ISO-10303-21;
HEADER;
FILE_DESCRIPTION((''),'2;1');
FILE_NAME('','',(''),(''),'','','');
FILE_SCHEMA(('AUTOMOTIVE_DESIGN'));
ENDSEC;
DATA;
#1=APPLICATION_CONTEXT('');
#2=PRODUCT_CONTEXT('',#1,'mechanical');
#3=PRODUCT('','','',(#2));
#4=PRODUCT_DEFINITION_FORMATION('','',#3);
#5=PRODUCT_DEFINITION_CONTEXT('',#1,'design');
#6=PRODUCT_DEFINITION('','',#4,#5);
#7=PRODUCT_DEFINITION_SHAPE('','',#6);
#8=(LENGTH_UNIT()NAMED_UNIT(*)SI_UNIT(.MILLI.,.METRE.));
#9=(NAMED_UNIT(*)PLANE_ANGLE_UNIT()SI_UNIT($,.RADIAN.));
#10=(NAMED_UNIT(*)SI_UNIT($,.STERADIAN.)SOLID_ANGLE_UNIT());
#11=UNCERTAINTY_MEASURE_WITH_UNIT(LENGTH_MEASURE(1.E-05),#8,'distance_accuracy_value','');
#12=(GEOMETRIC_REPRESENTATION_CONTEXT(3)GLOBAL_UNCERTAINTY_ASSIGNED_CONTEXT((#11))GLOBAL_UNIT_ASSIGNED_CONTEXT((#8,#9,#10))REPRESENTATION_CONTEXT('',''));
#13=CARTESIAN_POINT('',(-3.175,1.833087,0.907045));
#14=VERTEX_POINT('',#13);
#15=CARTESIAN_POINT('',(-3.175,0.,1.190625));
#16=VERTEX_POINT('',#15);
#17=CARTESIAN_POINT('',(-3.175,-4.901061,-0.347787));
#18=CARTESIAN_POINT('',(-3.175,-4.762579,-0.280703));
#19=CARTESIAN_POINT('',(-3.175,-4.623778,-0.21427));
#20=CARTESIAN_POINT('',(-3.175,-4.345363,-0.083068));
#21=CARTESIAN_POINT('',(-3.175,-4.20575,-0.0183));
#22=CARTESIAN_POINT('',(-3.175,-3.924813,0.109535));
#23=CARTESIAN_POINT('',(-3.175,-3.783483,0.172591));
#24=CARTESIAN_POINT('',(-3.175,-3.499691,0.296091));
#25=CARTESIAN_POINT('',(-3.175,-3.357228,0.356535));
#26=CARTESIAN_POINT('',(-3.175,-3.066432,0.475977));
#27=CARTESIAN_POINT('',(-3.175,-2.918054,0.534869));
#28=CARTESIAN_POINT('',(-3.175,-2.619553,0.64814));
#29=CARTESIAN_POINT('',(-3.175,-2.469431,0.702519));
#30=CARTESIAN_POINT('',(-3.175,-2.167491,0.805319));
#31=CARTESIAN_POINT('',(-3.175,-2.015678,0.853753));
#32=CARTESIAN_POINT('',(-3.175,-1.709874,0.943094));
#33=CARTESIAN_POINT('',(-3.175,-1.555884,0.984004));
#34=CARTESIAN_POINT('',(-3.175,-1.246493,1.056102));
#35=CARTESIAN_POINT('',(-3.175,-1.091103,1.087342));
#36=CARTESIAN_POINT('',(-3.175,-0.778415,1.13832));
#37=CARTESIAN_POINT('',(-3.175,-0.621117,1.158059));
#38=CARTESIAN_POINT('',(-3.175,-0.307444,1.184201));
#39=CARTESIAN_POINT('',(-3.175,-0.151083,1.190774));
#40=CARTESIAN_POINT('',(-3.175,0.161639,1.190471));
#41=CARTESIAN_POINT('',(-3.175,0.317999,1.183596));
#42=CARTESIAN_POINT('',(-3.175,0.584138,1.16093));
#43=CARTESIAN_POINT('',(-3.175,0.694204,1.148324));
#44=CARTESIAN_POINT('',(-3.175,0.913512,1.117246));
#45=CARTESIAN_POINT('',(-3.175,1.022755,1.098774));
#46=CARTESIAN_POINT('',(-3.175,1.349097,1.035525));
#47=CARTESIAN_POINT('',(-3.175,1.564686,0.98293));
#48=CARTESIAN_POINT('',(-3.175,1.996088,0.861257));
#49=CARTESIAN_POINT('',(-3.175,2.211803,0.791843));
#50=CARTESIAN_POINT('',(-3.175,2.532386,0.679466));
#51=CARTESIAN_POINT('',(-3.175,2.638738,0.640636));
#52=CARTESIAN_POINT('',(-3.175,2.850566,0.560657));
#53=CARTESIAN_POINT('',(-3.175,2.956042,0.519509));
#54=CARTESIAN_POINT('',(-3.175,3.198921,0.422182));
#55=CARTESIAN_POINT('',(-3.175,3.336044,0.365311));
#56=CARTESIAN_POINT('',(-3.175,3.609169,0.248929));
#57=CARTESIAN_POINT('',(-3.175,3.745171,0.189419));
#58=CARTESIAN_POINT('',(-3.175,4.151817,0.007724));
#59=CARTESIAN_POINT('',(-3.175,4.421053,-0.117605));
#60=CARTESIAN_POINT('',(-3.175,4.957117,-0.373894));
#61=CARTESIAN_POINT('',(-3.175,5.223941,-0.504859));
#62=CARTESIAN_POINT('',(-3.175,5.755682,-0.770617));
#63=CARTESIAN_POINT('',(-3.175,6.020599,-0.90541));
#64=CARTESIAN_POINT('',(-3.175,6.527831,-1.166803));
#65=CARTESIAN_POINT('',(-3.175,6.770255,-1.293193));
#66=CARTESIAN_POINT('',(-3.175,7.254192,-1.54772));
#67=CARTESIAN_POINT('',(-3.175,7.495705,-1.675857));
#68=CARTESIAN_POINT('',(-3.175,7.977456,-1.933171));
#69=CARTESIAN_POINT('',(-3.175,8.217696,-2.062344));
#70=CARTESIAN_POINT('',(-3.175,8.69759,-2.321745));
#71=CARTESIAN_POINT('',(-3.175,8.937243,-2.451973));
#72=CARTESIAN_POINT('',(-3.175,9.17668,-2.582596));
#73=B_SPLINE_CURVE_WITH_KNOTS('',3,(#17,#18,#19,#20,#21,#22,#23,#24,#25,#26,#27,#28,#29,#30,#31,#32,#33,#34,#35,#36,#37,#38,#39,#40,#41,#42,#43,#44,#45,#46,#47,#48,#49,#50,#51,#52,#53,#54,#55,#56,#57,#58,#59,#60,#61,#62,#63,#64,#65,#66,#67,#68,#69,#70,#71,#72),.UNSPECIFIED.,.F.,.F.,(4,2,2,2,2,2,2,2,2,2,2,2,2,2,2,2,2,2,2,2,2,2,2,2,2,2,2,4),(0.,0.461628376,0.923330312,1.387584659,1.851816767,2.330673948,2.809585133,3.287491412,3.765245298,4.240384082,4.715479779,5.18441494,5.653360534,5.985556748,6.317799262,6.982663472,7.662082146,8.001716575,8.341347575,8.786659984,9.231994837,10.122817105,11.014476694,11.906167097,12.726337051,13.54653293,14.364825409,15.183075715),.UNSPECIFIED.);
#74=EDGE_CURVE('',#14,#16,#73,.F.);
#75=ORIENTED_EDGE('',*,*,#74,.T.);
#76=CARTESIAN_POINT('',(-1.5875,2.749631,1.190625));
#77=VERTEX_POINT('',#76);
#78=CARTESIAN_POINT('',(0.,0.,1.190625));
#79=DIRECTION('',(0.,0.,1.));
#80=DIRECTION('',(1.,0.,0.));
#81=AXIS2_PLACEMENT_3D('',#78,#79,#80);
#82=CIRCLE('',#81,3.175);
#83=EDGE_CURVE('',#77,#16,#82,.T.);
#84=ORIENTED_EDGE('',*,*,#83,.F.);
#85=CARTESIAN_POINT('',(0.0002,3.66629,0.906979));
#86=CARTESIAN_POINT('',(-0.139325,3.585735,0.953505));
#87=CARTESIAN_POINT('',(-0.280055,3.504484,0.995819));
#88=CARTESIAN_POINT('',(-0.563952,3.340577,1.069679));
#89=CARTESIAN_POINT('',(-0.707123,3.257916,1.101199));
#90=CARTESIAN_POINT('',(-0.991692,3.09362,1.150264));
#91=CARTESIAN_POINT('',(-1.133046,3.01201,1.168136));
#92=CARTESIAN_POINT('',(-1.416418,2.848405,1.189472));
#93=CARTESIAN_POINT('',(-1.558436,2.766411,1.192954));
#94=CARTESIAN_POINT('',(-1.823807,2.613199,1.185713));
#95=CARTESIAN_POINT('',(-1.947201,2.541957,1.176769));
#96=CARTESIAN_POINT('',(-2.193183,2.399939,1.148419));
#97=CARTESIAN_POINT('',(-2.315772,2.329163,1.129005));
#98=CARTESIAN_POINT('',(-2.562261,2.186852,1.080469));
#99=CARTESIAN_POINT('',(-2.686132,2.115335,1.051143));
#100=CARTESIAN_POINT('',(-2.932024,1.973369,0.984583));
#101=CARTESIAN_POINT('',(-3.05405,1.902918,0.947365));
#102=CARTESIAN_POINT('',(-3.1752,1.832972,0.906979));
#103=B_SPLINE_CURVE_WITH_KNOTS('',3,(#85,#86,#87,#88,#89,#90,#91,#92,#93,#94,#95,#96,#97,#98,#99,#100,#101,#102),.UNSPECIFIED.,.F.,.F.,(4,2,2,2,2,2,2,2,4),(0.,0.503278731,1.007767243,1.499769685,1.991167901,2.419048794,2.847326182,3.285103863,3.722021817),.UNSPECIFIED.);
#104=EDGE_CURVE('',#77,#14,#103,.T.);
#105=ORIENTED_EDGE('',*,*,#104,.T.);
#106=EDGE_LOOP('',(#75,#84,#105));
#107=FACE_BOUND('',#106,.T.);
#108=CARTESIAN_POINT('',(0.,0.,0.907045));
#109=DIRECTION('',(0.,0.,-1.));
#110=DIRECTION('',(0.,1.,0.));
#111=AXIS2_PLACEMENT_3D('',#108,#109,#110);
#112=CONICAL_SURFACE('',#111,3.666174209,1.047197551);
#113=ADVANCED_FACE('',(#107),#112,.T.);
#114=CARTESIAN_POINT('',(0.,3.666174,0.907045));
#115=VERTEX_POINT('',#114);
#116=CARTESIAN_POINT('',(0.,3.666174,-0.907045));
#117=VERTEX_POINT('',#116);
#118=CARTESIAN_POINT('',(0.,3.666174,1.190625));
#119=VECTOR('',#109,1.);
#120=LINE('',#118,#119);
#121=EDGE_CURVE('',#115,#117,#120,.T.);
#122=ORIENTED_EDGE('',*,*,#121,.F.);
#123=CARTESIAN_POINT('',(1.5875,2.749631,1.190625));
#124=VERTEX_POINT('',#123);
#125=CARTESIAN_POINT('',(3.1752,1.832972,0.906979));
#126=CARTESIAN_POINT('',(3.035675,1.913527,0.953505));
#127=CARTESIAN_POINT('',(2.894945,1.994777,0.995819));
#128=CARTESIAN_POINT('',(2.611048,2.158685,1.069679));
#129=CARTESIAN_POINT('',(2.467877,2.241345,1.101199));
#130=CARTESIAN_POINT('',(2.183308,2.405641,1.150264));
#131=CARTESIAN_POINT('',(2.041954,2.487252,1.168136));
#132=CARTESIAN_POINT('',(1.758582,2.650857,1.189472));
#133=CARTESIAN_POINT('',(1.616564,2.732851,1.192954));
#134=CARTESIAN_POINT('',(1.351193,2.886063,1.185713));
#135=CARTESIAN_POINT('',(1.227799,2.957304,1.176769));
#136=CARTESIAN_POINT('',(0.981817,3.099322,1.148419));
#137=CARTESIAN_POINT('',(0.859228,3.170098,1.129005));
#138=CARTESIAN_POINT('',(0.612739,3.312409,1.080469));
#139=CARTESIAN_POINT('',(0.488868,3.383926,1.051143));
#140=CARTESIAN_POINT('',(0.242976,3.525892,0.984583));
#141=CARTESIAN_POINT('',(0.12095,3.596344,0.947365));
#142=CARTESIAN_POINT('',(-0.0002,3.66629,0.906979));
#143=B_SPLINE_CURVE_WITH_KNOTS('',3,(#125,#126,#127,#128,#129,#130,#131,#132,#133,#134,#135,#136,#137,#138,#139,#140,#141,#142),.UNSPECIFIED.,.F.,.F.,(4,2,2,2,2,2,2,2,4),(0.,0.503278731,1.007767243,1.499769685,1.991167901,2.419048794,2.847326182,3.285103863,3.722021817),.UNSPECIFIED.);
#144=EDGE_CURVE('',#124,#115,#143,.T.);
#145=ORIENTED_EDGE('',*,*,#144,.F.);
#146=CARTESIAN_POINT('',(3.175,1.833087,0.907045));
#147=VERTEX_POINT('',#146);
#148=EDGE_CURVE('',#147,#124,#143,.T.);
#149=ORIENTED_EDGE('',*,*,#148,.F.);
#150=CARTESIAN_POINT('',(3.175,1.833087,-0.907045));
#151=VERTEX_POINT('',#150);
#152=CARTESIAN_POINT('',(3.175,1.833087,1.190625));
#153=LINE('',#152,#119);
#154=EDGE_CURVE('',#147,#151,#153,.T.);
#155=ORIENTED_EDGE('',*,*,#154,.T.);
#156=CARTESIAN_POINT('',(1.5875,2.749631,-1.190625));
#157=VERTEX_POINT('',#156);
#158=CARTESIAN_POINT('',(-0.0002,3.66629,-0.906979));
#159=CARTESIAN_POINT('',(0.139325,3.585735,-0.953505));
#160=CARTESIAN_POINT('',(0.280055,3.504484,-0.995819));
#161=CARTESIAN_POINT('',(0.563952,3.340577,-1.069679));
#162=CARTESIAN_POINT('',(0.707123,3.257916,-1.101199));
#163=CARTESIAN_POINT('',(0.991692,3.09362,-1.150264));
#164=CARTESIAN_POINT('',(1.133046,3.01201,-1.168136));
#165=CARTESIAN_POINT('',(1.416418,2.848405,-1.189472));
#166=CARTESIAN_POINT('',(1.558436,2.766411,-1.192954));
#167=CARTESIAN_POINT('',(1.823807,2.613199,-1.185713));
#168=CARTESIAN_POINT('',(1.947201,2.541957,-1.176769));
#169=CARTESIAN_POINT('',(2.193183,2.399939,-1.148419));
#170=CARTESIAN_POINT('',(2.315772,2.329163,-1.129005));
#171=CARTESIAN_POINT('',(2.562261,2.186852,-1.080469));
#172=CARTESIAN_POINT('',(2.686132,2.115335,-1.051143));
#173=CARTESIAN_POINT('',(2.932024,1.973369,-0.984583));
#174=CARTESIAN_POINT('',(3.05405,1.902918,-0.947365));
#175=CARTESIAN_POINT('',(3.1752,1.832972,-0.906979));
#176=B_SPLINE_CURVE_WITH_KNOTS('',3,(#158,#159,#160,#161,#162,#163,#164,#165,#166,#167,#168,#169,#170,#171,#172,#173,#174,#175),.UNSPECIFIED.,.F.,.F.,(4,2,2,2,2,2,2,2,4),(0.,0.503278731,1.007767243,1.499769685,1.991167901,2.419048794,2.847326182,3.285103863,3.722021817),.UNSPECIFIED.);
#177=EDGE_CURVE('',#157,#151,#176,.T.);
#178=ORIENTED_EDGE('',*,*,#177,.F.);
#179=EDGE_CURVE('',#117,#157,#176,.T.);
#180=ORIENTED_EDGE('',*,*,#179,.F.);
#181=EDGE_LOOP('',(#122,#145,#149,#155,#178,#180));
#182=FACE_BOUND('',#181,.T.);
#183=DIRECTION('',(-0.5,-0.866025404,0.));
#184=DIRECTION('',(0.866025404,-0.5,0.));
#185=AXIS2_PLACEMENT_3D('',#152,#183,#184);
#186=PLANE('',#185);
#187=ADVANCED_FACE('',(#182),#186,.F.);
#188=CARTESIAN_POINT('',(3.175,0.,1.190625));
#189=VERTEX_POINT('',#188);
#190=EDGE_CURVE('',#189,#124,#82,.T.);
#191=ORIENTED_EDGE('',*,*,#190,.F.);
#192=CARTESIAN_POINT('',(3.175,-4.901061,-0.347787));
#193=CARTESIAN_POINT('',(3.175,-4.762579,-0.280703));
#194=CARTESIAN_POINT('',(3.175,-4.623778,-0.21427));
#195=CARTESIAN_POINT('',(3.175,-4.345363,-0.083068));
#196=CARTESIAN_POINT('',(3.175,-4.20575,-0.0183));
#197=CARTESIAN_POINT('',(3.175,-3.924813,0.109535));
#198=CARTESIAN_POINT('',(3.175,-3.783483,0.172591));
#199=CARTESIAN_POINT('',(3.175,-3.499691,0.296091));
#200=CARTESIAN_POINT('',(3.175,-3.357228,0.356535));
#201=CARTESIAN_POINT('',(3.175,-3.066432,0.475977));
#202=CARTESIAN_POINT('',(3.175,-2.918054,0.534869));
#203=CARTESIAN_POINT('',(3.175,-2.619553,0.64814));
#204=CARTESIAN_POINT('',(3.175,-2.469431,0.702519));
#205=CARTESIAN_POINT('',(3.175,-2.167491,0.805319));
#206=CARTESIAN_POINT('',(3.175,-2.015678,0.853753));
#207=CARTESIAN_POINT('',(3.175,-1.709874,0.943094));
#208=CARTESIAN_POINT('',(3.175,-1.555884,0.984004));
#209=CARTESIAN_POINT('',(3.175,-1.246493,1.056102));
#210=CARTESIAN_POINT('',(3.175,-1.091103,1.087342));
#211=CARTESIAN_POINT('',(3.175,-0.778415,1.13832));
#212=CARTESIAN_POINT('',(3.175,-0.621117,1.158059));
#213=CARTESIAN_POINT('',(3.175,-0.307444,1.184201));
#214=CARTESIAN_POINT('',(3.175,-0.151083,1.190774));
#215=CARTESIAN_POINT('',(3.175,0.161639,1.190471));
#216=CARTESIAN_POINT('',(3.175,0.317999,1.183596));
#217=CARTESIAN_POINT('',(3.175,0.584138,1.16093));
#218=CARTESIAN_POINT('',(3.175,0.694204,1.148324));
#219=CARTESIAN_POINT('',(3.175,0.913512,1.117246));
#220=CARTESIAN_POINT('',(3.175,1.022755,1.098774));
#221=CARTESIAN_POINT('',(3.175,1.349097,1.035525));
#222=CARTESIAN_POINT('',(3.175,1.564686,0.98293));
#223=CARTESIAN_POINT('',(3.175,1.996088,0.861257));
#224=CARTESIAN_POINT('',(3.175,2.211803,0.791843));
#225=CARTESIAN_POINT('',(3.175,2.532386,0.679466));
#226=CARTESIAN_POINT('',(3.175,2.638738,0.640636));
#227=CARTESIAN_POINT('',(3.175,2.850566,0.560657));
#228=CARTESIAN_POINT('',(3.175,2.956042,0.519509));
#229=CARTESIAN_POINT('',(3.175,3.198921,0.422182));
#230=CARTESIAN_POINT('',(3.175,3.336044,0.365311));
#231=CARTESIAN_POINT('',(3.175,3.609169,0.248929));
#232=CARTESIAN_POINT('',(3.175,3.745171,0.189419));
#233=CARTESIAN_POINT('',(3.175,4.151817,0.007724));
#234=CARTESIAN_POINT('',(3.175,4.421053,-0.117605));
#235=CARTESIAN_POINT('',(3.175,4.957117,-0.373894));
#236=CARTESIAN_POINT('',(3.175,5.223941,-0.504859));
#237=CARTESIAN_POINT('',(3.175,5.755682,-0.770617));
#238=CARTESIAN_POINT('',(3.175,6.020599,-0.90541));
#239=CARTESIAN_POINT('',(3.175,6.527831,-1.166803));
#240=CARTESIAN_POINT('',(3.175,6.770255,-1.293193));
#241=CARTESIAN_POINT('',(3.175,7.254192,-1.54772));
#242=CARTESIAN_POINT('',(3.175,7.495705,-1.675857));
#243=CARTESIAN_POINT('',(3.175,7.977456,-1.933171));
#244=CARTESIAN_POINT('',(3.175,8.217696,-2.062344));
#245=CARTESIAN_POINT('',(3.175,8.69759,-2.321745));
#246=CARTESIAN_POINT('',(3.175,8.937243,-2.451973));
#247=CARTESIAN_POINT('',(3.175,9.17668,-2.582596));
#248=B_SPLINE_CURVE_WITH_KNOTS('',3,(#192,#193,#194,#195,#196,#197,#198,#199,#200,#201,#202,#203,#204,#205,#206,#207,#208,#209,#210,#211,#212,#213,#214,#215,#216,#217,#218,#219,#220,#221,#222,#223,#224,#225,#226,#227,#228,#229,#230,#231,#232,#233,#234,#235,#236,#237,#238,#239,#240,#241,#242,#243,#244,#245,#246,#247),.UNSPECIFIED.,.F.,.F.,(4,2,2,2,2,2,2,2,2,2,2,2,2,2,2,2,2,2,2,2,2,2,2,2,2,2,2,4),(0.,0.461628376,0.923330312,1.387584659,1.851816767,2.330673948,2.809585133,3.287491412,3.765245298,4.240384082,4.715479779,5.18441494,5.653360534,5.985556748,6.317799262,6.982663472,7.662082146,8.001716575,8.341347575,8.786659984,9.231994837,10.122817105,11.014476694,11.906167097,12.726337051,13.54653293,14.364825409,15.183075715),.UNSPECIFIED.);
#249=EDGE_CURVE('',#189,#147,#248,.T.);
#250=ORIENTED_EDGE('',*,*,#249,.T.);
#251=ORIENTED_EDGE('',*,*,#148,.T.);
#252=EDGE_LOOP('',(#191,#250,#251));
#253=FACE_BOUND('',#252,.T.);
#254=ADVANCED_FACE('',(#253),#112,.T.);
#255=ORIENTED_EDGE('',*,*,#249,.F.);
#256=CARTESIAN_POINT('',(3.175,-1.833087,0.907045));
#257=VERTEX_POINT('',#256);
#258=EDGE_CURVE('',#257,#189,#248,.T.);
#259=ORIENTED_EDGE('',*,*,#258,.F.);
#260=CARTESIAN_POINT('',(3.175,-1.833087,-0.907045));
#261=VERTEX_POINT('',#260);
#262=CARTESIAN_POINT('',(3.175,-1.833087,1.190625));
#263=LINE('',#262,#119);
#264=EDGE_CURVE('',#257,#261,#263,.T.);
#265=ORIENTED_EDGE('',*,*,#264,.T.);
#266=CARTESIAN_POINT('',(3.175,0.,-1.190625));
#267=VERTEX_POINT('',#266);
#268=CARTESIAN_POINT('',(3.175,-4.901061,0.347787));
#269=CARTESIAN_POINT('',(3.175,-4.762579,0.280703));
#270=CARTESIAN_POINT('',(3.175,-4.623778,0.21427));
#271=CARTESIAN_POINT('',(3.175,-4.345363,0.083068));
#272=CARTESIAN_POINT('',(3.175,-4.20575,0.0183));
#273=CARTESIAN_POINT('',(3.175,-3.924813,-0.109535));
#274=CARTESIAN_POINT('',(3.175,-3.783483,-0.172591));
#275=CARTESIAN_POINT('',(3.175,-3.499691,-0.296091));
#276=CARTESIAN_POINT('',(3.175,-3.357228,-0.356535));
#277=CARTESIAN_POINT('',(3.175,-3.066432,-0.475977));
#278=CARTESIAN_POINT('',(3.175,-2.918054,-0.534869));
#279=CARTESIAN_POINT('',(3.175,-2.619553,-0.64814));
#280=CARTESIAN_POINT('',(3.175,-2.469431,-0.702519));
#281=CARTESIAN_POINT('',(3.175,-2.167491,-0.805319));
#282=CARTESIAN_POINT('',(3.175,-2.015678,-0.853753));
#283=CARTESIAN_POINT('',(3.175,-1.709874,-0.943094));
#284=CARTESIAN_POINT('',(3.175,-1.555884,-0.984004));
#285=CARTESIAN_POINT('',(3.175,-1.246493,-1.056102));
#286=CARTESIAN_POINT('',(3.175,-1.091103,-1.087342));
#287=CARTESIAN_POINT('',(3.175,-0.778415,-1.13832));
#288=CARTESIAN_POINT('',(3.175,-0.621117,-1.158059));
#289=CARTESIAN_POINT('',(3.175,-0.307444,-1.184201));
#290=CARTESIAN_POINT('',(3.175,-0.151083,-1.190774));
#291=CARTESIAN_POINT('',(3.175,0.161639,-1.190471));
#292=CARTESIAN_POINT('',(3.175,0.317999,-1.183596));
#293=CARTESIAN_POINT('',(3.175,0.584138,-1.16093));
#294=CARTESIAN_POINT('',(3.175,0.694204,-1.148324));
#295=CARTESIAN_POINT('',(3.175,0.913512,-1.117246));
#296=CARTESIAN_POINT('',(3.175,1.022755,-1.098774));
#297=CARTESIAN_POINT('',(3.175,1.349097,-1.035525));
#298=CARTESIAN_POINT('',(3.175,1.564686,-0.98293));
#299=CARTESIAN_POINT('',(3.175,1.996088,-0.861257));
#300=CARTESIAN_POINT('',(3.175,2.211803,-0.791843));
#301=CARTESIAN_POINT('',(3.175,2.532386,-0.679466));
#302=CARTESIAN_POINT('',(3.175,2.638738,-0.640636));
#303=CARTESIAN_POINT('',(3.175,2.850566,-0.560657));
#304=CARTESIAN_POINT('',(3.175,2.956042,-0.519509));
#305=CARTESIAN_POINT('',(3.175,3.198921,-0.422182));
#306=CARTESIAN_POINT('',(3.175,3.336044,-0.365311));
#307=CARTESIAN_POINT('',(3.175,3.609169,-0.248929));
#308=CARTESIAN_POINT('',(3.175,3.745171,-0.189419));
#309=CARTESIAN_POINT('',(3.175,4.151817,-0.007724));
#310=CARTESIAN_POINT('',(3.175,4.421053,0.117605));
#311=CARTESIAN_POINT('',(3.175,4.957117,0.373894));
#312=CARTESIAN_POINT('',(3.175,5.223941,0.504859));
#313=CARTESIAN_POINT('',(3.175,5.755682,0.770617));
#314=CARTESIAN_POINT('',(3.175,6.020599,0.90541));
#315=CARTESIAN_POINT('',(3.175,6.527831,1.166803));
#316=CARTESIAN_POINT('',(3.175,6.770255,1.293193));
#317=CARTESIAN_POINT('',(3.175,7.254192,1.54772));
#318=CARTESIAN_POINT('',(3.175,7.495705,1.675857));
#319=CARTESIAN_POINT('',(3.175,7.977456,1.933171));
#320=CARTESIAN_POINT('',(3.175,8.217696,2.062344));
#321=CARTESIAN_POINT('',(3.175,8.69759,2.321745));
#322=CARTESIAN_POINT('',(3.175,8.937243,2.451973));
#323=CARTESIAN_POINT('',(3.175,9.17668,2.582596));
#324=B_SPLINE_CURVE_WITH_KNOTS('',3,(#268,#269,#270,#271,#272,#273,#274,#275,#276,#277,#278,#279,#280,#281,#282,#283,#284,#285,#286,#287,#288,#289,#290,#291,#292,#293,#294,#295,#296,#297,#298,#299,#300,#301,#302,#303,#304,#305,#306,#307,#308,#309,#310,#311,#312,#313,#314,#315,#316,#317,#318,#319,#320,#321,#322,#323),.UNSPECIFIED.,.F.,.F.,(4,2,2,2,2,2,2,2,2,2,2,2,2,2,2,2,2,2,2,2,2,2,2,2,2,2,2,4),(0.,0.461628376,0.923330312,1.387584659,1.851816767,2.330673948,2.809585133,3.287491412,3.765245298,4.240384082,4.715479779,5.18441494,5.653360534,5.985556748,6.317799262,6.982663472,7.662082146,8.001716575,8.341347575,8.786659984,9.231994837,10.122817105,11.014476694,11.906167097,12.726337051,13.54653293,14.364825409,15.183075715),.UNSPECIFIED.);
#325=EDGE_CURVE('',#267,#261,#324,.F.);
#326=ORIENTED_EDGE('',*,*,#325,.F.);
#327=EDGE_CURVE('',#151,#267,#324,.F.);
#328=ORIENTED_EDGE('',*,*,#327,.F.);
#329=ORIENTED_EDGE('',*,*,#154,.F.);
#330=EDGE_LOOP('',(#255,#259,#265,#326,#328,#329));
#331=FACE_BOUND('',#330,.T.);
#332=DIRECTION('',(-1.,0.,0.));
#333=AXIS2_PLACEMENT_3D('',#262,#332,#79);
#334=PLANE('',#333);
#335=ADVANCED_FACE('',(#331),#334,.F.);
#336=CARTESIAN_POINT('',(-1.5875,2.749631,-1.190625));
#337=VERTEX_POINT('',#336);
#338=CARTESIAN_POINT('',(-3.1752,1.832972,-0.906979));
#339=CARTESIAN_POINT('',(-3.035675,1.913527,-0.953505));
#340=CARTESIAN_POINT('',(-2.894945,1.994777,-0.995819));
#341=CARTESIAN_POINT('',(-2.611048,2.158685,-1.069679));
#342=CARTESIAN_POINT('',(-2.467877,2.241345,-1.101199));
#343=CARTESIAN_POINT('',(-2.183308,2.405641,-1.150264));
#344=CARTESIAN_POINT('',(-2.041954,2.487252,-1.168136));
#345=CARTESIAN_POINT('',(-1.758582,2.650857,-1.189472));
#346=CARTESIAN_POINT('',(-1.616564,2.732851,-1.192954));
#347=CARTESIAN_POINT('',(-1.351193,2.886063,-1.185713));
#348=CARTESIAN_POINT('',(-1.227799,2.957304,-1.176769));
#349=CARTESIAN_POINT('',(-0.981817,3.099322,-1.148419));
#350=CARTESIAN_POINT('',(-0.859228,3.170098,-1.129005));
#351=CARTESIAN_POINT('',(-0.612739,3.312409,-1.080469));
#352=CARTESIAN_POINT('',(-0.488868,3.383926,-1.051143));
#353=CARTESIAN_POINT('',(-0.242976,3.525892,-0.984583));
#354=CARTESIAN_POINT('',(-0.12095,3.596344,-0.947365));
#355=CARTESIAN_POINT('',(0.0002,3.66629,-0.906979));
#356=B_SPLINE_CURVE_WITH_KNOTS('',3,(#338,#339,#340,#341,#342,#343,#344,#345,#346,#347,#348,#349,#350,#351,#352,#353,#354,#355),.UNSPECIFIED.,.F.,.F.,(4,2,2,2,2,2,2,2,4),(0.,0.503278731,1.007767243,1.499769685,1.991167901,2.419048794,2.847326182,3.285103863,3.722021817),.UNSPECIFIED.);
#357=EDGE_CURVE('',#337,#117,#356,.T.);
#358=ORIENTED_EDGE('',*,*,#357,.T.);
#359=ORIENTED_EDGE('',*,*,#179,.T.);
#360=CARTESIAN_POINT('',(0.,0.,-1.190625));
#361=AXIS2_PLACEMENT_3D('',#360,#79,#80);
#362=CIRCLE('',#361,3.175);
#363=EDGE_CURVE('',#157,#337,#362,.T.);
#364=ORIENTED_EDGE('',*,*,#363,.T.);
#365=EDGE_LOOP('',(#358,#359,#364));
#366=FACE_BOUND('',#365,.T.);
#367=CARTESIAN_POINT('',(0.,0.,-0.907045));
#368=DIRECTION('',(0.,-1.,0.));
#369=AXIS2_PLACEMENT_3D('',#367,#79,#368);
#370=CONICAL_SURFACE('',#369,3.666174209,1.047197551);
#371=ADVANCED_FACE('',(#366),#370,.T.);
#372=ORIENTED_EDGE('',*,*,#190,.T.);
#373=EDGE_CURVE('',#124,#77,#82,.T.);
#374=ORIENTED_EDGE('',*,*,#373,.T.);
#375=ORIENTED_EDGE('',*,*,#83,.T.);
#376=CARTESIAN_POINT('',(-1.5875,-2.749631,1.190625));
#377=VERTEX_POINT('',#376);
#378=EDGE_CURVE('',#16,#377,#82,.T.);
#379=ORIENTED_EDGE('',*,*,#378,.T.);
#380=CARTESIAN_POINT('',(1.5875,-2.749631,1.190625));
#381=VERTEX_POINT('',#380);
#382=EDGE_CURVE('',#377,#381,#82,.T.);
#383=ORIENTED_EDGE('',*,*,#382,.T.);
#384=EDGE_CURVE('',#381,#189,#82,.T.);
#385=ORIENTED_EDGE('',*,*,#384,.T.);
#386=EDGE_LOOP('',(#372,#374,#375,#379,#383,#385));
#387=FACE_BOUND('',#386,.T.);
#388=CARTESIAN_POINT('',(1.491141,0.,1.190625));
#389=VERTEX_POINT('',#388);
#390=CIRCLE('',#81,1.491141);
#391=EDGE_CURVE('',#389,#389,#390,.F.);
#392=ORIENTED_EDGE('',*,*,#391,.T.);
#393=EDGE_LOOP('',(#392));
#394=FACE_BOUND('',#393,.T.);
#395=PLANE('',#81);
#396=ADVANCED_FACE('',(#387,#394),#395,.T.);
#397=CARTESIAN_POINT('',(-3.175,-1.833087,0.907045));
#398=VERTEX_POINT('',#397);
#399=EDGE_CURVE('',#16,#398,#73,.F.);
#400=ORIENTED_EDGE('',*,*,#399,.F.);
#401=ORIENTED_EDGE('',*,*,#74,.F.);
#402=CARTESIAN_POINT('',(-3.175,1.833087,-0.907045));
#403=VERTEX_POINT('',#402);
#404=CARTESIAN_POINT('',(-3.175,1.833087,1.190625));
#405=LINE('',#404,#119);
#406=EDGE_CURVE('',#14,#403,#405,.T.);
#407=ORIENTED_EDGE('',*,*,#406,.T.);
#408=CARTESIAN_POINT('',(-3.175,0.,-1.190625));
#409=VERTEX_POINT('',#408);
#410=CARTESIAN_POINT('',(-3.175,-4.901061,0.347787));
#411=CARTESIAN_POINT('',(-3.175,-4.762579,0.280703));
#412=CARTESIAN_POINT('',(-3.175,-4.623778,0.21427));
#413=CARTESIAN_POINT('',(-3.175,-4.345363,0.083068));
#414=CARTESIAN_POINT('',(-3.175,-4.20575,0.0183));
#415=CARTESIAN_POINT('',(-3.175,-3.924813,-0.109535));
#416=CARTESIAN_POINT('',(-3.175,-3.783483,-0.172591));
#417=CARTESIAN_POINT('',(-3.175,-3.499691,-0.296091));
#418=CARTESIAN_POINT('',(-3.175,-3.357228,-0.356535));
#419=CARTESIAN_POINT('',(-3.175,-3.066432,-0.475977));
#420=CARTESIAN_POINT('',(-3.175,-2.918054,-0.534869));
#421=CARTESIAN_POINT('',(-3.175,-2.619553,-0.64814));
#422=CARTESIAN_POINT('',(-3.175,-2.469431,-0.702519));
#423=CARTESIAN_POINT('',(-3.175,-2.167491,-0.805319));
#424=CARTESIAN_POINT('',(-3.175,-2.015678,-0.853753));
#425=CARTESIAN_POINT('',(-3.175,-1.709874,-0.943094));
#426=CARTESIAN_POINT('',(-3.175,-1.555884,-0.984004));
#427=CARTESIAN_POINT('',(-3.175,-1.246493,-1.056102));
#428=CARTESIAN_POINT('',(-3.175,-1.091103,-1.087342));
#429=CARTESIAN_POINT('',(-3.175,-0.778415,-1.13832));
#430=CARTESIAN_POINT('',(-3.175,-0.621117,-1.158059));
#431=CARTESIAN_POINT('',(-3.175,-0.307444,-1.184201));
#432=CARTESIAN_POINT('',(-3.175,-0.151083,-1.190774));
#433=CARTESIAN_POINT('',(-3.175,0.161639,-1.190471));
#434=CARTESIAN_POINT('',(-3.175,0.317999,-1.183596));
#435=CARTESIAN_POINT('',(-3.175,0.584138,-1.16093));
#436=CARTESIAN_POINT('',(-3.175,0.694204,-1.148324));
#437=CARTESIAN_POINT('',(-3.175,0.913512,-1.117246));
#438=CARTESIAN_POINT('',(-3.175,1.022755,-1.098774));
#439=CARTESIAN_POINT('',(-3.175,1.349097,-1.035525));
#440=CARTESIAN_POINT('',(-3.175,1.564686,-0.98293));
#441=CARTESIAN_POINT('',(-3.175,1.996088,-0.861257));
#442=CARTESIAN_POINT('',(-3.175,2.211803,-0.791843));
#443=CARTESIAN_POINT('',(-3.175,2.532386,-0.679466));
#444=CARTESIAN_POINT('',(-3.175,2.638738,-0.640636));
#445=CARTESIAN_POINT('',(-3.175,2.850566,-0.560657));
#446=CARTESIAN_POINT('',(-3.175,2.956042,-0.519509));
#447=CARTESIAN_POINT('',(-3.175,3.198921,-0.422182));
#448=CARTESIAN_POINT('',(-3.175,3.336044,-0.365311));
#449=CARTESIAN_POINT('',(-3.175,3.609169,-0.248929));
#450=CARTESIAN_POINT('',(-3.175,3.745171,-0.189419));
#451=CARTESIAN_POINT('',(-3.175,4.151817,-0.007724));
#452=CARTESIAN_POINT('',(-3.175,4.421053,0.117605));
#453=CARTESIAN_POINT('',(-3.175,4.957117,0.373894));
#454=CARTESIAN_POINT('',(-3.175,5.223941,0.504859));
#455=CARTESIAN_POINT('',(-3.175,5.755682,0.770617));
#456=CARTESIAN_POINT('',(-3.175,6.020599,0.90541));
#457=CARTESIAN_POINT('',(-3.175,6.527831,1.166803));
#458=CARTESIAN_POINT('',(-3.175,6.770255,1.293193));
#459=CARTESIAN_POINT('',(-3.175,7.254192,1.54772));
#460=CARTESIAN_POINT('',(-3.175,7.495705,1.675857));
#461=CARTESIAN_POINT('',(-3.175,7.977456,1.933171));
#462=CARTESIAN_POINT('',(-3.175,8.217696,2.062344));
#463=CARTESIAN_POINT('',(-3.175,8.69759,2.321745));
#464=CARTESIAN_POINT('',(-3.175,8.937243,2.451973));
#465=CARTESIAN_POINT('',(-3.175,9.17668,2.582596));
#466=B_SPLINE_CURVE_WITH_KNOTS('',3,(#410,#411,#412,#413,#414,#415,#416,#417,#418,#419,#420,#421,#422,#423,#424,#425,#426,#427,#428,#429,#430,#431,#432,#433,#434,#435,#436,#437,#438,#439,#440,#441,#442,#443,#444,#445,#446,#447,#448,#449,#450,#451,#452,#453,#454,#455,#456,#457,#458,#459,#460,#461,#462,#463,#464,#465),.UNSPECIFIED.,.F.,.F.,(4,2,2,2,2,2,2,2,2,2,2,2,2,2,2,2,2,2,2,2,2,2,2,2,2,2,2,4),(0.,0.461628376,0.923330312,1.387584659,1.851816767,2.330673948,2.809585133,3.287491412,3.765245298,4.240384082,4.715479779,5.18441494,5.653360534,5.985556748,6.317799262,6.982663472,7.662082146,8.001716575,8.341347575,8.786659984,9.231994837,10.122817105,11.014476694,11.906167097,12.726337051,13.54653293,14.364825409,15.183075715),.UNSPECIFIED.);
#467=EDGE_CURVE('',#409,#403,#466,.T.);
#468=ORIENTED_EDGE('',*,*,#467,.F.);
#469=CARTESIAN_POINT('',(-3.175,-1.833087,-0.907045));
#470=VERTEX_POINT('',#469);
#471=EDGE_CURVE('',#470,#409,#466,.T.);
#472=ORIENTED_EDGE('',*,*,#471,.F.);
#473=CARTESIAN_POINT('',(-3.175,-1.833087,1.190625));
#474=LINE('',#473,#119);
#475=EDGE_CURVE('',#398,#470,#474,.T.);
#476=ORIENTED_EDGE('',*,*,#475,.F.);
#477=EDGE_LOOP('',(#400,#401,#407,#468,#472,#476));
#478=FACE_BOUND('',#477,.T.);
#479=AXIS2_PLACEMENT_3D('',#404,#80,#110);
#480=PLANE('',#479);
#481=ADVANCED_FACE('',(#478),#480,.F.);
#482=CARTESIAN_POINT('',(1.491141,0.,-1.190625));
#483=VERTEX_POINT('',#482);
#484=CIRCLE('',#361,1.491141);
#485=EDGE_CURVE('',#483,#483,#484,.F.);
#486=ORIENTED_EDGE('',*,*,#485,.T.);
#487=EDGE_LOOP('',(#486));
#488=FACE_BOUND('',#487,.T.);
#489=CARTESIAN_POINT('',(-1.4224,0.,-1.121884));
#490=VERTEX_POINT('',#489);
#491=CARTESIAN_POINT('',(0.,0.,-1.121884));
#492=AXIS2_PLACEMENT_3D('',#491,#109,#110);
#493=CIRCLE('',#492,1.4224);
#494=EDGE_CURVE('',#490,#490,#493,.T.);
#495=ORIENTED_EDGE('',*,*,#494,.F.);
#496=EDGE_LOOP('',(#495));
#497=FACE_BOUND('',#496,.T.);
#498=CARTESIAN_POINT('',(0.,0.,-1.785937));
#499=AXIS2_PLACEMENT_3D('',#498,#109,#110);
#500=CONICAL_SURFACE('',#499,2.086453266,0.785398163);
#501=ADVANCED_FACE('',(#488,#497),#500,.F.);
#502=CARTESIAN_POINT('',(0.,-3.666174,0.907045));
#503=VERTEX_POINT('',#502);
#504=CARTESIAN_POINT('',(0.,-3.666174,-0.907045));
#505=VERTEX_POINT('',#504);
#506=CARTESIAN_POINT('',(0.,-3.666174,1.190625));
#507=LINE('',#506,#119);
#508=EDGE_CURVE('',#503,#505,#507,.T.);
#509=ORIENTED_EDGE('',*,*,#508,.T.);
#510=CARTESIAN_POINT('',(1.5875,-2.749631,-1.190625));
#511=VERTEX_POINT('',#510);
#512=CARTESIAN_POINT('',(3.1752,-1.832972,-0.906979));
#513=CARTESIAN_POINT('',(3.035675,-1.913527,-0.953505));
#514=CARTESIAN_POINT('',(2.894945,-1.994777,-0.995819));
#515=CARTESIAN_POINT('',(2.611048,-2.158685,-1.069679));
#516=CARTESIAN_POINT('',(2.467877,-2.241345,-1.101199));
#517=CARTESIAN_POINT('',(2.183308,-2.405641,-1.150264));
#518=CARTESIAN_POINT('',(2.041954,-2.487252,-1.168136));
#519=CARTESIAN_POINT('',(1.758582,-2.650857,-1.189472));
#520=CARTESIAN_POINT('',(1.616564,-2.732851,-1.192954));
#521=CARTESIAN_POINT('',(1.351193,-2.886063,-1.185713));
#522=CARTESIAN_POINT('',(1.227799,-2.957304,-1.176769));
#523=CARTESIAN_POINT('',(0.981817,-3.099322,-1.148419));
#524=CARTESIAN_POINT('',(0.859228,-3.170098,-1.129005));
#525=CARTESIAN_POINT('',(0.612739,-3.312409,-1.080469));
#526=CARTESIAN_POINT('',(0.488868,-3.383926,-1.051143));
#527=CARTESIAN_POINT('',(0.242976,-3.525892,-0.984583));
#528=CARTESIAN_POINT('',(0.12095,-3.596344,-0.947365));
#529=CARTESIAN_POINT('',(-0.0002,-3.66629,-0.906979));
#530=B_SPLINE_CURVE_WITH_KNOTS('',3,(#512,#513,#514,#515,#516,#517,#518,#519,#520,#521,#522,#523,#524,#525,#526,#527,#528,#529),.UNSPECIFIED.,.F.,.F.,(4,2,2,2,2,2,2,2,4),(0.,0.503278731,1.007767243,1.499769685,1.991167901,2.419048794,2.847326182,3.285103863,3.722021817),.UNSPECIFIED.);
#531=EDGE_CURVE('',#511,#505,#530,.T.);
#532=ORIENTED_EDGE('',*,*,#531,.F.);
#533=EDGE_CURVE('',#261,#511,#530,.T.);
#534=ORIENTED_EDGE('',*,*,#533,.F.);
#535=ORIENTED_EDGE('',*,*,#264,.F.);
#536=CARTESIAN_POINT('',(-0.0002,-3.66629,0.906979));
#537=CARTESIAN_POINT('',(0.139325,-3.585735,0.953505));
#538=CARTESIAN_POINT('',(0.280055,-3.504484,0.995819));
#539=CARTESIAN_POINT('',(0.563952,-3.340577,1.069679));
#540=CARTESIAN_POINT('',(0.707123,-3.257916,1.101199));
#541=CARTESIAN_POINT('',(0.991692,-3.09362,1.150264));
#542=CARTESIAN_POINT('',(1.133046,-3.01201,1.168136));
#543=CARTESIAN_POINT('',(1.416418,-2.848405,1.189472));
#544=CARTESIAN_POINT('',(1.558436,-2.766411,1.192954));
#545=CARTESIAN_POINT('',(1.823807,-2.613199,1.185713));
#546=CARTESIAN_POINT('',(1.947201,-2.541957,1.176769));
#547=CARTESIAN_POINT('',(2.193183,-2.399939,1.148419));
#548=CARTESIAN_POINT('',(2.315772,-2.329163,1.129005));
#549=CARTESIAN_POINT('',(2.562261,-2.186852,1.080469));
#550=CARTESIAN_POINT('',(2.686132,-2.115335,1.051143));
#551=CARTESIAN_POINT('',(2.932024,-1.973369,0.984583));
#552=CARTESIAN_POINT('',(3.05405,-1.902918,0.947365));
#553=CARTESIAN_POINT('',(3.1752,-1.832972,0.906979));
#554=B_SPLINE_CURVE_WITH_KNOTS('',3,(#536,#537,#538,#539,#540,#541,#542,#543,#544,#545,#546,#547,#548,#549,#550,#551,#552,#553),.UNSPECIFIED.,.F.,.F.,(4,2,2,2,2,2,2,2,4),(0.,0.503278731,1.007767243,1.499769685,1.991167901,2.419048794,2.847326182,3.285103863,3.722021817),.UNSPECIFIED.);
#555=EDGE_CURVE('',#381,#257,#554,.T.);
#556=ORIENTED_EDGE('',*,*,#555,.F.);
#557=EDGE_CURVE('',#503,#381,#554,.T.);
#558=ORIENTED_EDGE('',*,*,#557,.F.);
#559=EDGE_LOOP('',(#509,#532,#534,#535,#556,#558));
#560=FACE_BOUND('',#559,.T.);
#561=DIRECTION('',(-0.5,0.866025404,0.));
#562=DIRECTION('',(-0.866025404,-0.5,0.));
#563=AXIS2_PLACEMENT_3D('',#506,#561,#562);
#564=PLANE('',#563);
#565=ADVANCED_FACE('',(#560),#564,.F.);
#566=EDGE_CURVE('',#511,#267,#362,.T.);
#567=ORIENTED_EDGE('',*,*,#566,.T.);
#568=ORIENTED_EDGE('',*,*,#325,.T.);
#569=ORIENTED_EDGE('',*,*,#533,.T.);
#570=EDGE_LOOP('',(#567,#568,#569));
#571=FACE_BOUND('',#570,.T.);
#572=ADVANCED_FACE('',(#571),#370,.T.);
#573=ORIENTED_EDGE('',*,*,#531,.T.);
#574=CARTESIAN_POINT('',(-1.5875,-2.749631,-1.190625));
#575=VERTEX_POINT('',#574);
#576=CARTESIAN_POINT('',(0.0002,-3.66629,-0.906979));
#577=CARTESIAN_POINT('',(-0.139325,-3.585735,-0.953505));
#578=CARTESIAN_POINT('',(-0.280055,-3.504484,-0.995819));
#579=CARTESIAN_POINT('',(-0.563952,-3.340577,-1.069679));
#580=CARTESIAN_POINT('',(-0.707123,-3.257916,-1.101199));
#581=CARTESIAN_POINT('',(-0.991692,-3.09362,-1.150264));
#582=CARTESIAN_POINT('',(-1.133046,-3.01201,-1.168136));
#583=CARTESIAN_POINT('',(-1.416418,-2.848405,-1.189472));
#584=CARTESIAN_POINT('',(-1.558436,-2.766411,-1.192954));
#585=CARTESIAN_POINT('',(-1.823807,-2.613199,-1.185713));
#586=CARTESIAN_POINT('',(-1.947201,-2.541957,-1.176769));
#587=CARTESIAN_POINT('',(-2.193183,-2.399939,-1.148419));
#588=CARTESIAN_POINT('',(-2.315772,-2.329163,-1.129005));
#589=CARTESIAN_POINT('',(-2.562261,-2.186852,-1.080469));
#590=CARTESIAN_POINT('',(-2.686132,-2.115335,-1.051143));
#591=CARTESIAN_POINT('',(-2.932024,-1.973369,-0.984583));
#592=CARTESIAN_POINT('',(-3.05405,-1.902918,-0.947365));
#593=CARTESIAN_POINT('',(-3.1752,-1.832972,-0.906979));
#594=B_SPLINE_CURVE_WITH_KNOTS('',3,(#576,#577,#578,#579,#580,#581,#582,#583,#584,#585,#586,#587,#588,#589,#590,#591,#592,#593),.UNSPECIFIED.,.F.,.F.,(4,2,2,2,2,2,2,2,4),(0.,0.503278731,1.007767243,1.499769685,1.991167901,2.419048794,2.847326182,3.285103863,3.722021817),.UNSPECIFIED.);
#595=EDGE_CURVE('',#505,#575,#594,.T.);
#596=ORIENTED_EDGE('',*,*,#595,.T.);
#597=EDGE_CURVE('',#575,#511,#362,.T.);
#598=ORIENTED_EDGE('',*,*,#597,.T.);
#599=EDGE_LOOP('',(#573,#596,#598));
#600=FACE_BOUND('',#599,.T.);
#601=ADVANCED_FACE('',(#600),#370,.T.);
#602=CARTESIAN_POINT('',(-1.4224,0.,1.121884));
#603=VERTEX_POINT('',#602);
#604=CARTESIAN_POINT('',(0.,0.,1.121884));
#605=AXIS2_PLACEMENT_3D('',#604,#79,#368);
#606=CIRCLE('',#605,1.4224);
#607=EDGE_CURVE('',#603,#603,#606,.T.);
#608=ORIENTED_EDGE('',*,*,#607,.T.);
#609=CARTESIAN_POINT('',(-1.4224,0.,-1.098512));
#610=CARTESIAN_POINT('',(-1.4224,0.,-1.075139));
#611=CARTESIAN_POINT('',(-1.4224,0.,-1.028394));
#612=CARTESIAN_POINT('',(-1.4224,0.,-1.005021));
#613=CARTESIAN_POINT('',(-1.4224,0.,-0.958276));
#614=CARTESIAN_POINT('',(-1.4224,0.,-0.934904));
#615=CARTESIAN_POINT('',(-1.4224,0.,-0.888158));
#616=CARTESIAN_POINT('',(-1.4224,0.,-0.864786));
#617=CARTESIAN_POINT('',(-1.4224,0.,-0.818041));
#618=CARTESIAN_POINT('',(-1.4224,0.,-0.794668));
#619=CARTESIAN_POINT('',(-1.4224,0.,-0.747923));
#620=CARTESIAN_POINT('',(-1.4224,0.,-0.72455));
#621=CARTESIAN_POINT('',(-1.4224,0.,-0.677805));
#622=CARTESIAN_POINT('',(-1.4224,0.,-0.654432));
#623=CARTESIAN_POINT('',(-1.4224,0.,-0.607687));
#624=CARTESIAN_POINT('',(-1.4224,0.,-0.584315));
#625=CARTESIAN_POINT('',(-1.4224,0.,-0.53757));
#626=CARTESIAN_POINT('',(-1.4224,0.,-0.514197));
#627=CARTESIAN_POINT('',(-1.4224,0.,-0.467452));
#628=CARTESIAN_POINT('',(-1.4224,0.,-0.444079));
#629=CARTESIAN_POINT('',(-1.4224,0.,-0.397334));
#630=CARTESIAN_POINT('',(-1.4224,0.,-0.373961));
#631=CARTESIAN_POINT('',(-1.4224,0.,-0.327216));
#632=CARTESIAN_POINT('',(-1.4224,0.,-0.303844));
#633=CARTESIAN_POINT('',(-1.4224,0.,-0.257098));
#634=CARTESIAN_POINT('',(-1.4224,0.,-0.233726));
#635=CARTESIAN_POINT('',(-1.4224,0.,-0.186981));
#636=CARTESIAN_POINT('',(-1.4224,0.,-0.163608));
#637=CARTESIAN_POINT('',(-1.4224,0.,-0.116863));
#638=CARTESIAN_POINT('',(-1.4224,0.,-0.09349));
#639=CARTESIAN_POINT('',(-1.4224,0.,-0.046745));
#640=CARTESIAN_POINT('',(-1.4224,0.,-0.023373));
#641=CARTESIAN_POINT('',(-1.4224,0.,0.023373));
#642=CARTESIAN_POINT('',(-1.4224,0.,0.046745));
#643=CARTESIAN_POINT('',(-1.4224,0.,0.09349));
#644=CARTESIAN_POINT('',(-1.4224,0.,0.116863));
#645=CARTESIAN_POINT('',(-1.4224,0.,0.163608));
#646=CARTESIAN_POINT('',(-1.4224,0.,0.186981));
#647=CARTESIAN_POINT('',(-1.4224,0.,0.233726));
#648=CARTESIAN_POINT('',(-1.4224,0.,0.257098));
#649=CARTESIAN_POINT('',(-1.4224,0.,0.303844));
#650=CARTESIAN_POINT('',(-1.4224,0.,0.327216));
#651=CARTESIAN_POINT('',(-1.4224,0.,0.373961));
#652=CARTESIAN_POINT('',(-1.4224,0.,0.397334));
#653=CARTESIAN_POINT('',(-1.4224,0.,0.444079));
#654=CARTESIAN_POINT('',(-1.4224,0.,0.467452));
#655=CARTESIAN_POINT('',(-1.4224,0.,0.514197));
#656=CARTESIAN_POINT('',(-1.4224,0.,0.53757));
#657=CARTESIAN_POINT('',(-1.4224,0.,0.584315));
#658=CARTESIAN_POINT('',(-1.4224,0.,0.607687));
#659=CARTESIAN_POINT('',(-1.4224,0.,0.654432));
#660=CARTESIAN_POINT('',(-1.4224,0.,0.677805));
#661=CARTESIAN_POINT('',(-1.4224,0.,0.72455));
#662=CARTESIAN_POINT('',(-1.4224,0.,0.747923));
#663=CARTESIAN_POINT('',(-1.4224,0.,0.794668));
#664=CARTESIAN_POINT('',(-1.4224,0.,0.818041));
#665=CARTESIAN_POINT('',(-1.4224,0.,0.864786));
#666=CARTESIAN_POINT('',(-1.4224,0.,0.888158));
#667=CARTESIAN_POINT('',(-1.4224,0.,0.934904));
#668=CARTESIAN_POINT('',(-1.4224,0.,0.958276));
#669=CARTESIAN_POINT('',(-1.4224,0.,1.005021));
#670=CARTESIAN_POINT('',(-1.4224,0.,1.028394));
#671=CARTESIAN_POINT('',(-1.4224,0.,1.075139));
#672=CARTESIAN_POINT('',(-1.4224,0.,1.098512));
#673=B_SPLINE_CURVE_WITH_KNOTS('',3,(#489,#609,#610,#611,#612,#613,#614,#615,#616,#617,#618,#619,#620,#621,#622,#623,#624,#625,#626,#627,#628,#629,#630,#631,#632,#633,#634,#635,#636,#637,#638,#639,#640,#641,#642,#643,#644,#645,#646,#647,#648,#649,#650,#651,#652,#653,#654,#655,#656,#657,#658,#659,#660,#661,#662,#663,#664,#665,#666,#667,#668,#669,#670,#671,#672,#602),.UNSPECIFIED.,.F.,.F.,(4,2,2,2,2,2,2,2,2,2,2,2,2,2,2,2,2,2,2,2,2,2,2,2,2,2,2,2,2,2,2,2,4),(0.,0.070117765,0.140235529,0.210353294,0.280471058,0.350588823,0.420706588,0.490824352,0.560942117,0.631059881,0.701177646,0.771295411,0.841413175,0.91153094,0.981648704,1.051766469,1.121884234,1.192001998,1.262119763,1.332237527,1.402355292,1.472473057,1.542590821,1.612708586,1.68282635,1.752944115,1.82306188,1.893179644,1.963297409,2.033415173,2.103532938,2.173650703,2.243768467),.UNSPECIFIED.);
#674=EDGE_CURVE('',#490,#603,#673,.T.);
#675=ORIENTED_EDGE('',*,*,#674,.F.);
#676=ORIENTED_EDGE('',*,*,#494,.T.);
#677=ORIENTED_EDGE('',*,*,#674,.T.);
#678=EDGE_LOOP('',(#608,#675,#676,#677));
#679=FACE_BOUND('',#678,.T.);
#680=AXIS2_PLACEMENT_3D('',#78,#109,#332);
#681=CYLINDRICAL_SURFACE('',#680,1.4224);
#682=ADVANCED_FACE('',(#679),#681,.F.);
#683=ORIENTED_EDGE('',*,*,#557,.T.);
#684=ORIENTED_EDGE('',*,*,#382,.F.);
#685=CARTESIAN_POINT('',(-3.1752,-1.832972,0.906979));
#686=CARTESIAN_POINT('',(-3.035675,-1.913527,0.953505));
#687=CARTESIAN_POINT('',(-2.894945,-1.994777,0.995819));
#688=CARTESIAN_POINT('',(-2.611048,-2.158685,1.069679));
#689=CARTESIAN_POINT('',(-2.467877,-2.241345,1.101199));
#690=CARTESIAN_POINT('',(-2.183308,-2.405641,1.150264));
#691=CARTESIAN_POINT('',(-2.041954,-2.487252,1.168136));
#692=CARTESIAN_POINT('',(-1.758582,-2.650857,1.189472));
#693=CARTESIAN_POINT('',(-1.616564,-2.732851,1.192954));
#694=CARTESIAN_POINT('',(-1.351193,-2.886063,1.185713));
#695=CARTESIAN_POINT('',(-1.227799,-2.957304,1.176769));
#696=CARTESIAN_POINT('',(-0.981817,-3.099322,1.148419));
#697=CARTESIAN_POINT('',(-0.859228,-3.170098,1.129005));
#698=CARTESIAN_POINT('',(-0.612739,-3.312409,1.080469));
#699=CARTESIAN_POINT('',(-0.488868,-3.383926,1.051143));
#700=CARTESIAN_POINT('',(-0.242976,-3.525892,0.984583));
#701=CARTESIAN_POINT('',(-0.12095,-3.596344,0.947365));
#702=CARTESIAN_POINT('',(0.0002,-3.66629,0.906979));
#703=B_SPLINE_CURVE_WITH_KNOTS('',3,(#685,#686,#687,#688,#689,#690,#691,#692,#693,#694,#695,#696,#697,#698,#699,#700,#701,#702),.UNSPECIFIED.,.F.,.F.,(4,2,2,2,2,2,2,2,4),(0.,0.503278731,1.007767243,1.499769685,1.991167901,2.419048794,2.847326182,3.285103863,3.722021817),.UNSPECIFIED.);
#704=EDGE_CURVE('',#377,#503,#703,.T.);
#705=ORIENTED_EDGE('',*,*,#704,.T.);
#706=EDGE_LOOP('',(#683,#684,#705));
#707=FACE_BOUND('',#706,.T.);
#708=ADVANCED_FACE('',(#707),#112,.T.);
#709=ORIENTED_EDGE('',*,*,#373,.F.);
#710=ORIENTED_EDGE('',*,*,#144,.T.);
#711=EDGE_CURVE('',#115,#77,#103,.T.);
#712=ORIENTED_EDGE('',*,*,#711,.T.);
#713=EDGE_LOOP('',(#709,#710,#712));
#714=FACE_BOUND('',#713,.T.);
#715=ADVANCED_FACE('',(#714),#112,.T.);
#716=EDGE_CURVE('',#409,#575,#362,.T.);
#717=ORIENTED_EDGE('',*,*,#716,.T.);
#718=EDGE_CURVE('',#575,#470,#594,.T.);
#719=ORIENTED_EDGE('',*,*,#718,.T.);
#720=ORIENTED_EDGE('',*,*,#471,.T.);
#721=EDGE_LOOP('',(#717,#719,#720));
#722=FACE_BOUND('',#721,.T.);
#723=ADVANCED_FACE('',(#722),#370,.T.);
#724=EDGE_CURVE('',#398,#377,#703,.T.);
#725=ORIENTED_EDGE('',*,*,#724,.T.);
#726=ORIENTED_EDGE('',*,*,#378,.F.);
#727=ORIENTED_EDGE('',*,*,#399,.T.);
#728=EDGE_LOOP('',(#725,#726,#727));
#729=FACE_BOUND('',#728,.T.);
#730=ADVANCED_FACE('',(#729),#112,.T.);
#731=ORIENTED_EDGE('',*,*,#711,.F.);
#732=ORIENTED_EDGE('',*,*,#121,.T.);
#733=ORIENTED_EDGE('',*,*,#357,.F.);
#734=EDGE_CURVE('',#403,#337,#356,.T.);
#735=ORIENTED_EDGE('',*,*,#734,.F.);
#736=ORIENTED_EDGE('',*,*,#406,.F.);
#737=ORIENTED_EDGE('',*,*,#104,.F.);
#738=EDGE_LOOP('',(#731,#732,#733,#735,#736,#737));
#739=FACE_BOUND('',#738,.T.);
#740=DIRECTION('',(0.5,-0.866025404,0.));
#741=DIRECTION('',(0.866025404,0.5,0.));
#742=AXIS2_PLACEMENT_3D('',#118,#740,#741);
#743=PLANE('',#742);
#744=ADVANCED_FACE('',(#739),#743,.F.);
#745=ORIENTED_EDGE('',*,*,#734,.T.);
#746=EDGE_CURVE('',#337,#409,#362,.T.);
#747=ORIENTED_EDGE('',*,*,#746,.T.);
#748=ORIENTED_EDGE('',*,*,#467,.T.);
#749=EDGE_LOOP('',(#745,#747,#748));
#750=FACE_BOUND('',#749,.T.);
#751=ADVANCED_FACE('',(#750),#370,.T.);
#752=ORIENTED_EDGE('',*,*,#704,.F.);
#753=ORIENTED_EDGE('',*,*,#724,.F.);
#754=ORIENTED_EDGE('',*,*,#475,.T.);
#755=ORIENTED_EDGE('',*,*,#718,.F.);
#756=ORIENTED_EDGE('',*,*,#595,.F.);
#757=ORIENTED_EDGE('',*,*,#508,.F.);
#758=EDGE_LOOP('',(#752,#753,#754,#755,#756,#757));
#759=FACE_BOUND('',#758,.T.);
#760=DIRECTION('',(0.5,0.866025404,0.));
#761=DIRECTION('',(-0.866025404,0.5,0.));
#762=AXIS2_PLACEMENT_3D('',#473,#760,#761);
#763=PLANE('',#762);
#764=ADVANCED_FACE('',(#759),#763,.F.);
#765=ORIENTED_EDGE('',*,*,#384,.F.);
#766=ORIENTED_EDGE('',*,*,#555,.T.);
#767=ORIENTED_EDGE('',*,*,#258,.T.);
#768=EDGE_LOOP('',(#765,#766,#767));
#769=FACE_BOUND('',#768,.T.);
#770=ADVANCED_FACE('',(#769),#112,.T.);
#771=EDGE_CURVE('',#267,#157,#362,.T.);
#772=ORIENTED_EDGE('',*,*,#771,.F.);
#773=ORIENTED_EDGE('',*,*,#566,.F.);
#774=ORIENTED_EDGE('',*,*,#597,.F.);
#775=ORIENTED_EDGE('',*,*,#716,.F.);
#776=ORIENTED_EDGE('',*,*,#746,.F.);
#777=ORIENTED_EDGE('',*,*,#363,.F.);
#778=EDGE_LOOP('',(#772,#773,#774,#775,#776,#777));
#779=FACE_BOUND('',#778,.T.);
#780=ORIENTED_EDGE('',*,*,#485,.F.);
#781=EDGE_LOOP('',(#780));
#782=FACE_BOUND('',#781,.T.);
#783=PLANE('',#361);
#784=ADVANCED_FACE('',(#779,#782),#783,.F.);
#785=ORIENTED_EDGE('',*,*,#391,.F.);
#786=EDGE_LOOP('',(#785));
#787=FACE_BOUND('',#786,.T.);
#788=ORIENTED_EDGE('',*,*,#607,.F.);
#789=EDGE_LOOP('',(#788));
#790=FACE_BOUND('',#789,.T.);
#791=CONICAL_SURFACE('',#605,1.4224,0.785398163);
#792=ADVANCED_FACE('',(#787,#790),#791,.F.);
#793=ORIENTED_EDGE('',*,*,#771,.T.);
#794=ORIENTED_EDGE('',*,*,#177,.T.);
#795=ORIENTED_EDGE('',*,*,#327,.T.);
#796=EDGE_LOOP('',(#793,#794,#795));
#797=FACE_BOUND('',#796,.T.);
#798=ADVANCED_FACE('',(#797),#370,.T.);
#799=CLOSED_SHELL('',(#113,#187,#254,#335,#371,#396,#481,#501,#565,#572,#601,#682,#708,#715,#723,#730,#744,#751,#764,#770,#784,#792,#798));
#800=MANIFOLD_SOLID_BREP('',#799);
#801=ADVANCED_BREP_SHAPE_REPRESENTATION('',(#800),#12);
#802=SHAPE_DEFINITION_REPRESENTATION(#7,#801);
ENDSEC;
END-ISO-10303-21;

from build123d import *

# Parameters (mm, degrees)
BOSS_EXTRUDE1_START = -1.190625
SKETCH3_R           = 1.4224
BOSS_EXTRUDE1_DEPTH = 2.38125


# Read off the part's stored shape, not the designer's step: Cut-Revolve1
with BuildPart() as part:
    # Sketch3 → Boss-Extrude1 (new body)
    with BuildSketch(Plane.XY.offset(BOSS_EXTRUDE1_START)):
        Polygon((-3.175, 1.833087105), (-3.175, -1.833087105), (0, -3.666174209), (3.175, -1.833087105), (3.175, 1.833087105), (0, 3.666174209), align=None)
        with Locations(Location((0, 0, 0), (0, 0, 180))):
            Circle(SKETCH3_R, mode=Mode.SUBTRACT)
    extrude(amount=BOSS_EXTRUDE1_DEPTH)

    # Cut-Revolve1 outline → Cut-Revolve1 (revolve, cut)
    with BuildSketch(Plane.XZ):
        Polygon((3.66617421, -0.907045438), (3.174999964, -1.190625021), (3.666174217, -1.190625256), align=None)
        Polygon((3.175, 1.190625), (3.66617421, 0.907045438), (3.666174217, 1.190625256), align=None)
    revolve(axis=Axis((0, 0, 0), (0, 0, 1)), mode=Mode.SUBTRACT)

    # Sketch9 → Cut-Revolve2 (revolve, cut)
    with BuildSketch(Plane(origin=(0, 0, 0), x_dir=(0, 0, -1), z_dir=(1, 0, 0)), mode=Mode.PRIVATE) as cut_revolve2_sk:
        Polygon((-1.121884234, 1.4224), (-1.7859375, 2.086453266), (-1.7859375, 1.4224), (-1.7859375, 0), (-1.121884234, 0), (-0.640698869, 0), (-0.640698869, 0.941214635), align=None)
        Polygon((1.7859375, 2.086453266), (1.7859375, 1.4224), (1.7859375, 0), (1.121884234, 0), (0.640698869, 0), (0.640698869, 0.941214635), (1.121884234, 1.4224), align=None)
    revolve(cut_revolve2_sk.sketch.rotate(Axis((0, 0, 1.190625), (0, 0, -1)), 270), axis=Axis((0, 0, 1.190625), (0, 0, -1)), mode=Mode.SUBTRACT)


solid = part.part
